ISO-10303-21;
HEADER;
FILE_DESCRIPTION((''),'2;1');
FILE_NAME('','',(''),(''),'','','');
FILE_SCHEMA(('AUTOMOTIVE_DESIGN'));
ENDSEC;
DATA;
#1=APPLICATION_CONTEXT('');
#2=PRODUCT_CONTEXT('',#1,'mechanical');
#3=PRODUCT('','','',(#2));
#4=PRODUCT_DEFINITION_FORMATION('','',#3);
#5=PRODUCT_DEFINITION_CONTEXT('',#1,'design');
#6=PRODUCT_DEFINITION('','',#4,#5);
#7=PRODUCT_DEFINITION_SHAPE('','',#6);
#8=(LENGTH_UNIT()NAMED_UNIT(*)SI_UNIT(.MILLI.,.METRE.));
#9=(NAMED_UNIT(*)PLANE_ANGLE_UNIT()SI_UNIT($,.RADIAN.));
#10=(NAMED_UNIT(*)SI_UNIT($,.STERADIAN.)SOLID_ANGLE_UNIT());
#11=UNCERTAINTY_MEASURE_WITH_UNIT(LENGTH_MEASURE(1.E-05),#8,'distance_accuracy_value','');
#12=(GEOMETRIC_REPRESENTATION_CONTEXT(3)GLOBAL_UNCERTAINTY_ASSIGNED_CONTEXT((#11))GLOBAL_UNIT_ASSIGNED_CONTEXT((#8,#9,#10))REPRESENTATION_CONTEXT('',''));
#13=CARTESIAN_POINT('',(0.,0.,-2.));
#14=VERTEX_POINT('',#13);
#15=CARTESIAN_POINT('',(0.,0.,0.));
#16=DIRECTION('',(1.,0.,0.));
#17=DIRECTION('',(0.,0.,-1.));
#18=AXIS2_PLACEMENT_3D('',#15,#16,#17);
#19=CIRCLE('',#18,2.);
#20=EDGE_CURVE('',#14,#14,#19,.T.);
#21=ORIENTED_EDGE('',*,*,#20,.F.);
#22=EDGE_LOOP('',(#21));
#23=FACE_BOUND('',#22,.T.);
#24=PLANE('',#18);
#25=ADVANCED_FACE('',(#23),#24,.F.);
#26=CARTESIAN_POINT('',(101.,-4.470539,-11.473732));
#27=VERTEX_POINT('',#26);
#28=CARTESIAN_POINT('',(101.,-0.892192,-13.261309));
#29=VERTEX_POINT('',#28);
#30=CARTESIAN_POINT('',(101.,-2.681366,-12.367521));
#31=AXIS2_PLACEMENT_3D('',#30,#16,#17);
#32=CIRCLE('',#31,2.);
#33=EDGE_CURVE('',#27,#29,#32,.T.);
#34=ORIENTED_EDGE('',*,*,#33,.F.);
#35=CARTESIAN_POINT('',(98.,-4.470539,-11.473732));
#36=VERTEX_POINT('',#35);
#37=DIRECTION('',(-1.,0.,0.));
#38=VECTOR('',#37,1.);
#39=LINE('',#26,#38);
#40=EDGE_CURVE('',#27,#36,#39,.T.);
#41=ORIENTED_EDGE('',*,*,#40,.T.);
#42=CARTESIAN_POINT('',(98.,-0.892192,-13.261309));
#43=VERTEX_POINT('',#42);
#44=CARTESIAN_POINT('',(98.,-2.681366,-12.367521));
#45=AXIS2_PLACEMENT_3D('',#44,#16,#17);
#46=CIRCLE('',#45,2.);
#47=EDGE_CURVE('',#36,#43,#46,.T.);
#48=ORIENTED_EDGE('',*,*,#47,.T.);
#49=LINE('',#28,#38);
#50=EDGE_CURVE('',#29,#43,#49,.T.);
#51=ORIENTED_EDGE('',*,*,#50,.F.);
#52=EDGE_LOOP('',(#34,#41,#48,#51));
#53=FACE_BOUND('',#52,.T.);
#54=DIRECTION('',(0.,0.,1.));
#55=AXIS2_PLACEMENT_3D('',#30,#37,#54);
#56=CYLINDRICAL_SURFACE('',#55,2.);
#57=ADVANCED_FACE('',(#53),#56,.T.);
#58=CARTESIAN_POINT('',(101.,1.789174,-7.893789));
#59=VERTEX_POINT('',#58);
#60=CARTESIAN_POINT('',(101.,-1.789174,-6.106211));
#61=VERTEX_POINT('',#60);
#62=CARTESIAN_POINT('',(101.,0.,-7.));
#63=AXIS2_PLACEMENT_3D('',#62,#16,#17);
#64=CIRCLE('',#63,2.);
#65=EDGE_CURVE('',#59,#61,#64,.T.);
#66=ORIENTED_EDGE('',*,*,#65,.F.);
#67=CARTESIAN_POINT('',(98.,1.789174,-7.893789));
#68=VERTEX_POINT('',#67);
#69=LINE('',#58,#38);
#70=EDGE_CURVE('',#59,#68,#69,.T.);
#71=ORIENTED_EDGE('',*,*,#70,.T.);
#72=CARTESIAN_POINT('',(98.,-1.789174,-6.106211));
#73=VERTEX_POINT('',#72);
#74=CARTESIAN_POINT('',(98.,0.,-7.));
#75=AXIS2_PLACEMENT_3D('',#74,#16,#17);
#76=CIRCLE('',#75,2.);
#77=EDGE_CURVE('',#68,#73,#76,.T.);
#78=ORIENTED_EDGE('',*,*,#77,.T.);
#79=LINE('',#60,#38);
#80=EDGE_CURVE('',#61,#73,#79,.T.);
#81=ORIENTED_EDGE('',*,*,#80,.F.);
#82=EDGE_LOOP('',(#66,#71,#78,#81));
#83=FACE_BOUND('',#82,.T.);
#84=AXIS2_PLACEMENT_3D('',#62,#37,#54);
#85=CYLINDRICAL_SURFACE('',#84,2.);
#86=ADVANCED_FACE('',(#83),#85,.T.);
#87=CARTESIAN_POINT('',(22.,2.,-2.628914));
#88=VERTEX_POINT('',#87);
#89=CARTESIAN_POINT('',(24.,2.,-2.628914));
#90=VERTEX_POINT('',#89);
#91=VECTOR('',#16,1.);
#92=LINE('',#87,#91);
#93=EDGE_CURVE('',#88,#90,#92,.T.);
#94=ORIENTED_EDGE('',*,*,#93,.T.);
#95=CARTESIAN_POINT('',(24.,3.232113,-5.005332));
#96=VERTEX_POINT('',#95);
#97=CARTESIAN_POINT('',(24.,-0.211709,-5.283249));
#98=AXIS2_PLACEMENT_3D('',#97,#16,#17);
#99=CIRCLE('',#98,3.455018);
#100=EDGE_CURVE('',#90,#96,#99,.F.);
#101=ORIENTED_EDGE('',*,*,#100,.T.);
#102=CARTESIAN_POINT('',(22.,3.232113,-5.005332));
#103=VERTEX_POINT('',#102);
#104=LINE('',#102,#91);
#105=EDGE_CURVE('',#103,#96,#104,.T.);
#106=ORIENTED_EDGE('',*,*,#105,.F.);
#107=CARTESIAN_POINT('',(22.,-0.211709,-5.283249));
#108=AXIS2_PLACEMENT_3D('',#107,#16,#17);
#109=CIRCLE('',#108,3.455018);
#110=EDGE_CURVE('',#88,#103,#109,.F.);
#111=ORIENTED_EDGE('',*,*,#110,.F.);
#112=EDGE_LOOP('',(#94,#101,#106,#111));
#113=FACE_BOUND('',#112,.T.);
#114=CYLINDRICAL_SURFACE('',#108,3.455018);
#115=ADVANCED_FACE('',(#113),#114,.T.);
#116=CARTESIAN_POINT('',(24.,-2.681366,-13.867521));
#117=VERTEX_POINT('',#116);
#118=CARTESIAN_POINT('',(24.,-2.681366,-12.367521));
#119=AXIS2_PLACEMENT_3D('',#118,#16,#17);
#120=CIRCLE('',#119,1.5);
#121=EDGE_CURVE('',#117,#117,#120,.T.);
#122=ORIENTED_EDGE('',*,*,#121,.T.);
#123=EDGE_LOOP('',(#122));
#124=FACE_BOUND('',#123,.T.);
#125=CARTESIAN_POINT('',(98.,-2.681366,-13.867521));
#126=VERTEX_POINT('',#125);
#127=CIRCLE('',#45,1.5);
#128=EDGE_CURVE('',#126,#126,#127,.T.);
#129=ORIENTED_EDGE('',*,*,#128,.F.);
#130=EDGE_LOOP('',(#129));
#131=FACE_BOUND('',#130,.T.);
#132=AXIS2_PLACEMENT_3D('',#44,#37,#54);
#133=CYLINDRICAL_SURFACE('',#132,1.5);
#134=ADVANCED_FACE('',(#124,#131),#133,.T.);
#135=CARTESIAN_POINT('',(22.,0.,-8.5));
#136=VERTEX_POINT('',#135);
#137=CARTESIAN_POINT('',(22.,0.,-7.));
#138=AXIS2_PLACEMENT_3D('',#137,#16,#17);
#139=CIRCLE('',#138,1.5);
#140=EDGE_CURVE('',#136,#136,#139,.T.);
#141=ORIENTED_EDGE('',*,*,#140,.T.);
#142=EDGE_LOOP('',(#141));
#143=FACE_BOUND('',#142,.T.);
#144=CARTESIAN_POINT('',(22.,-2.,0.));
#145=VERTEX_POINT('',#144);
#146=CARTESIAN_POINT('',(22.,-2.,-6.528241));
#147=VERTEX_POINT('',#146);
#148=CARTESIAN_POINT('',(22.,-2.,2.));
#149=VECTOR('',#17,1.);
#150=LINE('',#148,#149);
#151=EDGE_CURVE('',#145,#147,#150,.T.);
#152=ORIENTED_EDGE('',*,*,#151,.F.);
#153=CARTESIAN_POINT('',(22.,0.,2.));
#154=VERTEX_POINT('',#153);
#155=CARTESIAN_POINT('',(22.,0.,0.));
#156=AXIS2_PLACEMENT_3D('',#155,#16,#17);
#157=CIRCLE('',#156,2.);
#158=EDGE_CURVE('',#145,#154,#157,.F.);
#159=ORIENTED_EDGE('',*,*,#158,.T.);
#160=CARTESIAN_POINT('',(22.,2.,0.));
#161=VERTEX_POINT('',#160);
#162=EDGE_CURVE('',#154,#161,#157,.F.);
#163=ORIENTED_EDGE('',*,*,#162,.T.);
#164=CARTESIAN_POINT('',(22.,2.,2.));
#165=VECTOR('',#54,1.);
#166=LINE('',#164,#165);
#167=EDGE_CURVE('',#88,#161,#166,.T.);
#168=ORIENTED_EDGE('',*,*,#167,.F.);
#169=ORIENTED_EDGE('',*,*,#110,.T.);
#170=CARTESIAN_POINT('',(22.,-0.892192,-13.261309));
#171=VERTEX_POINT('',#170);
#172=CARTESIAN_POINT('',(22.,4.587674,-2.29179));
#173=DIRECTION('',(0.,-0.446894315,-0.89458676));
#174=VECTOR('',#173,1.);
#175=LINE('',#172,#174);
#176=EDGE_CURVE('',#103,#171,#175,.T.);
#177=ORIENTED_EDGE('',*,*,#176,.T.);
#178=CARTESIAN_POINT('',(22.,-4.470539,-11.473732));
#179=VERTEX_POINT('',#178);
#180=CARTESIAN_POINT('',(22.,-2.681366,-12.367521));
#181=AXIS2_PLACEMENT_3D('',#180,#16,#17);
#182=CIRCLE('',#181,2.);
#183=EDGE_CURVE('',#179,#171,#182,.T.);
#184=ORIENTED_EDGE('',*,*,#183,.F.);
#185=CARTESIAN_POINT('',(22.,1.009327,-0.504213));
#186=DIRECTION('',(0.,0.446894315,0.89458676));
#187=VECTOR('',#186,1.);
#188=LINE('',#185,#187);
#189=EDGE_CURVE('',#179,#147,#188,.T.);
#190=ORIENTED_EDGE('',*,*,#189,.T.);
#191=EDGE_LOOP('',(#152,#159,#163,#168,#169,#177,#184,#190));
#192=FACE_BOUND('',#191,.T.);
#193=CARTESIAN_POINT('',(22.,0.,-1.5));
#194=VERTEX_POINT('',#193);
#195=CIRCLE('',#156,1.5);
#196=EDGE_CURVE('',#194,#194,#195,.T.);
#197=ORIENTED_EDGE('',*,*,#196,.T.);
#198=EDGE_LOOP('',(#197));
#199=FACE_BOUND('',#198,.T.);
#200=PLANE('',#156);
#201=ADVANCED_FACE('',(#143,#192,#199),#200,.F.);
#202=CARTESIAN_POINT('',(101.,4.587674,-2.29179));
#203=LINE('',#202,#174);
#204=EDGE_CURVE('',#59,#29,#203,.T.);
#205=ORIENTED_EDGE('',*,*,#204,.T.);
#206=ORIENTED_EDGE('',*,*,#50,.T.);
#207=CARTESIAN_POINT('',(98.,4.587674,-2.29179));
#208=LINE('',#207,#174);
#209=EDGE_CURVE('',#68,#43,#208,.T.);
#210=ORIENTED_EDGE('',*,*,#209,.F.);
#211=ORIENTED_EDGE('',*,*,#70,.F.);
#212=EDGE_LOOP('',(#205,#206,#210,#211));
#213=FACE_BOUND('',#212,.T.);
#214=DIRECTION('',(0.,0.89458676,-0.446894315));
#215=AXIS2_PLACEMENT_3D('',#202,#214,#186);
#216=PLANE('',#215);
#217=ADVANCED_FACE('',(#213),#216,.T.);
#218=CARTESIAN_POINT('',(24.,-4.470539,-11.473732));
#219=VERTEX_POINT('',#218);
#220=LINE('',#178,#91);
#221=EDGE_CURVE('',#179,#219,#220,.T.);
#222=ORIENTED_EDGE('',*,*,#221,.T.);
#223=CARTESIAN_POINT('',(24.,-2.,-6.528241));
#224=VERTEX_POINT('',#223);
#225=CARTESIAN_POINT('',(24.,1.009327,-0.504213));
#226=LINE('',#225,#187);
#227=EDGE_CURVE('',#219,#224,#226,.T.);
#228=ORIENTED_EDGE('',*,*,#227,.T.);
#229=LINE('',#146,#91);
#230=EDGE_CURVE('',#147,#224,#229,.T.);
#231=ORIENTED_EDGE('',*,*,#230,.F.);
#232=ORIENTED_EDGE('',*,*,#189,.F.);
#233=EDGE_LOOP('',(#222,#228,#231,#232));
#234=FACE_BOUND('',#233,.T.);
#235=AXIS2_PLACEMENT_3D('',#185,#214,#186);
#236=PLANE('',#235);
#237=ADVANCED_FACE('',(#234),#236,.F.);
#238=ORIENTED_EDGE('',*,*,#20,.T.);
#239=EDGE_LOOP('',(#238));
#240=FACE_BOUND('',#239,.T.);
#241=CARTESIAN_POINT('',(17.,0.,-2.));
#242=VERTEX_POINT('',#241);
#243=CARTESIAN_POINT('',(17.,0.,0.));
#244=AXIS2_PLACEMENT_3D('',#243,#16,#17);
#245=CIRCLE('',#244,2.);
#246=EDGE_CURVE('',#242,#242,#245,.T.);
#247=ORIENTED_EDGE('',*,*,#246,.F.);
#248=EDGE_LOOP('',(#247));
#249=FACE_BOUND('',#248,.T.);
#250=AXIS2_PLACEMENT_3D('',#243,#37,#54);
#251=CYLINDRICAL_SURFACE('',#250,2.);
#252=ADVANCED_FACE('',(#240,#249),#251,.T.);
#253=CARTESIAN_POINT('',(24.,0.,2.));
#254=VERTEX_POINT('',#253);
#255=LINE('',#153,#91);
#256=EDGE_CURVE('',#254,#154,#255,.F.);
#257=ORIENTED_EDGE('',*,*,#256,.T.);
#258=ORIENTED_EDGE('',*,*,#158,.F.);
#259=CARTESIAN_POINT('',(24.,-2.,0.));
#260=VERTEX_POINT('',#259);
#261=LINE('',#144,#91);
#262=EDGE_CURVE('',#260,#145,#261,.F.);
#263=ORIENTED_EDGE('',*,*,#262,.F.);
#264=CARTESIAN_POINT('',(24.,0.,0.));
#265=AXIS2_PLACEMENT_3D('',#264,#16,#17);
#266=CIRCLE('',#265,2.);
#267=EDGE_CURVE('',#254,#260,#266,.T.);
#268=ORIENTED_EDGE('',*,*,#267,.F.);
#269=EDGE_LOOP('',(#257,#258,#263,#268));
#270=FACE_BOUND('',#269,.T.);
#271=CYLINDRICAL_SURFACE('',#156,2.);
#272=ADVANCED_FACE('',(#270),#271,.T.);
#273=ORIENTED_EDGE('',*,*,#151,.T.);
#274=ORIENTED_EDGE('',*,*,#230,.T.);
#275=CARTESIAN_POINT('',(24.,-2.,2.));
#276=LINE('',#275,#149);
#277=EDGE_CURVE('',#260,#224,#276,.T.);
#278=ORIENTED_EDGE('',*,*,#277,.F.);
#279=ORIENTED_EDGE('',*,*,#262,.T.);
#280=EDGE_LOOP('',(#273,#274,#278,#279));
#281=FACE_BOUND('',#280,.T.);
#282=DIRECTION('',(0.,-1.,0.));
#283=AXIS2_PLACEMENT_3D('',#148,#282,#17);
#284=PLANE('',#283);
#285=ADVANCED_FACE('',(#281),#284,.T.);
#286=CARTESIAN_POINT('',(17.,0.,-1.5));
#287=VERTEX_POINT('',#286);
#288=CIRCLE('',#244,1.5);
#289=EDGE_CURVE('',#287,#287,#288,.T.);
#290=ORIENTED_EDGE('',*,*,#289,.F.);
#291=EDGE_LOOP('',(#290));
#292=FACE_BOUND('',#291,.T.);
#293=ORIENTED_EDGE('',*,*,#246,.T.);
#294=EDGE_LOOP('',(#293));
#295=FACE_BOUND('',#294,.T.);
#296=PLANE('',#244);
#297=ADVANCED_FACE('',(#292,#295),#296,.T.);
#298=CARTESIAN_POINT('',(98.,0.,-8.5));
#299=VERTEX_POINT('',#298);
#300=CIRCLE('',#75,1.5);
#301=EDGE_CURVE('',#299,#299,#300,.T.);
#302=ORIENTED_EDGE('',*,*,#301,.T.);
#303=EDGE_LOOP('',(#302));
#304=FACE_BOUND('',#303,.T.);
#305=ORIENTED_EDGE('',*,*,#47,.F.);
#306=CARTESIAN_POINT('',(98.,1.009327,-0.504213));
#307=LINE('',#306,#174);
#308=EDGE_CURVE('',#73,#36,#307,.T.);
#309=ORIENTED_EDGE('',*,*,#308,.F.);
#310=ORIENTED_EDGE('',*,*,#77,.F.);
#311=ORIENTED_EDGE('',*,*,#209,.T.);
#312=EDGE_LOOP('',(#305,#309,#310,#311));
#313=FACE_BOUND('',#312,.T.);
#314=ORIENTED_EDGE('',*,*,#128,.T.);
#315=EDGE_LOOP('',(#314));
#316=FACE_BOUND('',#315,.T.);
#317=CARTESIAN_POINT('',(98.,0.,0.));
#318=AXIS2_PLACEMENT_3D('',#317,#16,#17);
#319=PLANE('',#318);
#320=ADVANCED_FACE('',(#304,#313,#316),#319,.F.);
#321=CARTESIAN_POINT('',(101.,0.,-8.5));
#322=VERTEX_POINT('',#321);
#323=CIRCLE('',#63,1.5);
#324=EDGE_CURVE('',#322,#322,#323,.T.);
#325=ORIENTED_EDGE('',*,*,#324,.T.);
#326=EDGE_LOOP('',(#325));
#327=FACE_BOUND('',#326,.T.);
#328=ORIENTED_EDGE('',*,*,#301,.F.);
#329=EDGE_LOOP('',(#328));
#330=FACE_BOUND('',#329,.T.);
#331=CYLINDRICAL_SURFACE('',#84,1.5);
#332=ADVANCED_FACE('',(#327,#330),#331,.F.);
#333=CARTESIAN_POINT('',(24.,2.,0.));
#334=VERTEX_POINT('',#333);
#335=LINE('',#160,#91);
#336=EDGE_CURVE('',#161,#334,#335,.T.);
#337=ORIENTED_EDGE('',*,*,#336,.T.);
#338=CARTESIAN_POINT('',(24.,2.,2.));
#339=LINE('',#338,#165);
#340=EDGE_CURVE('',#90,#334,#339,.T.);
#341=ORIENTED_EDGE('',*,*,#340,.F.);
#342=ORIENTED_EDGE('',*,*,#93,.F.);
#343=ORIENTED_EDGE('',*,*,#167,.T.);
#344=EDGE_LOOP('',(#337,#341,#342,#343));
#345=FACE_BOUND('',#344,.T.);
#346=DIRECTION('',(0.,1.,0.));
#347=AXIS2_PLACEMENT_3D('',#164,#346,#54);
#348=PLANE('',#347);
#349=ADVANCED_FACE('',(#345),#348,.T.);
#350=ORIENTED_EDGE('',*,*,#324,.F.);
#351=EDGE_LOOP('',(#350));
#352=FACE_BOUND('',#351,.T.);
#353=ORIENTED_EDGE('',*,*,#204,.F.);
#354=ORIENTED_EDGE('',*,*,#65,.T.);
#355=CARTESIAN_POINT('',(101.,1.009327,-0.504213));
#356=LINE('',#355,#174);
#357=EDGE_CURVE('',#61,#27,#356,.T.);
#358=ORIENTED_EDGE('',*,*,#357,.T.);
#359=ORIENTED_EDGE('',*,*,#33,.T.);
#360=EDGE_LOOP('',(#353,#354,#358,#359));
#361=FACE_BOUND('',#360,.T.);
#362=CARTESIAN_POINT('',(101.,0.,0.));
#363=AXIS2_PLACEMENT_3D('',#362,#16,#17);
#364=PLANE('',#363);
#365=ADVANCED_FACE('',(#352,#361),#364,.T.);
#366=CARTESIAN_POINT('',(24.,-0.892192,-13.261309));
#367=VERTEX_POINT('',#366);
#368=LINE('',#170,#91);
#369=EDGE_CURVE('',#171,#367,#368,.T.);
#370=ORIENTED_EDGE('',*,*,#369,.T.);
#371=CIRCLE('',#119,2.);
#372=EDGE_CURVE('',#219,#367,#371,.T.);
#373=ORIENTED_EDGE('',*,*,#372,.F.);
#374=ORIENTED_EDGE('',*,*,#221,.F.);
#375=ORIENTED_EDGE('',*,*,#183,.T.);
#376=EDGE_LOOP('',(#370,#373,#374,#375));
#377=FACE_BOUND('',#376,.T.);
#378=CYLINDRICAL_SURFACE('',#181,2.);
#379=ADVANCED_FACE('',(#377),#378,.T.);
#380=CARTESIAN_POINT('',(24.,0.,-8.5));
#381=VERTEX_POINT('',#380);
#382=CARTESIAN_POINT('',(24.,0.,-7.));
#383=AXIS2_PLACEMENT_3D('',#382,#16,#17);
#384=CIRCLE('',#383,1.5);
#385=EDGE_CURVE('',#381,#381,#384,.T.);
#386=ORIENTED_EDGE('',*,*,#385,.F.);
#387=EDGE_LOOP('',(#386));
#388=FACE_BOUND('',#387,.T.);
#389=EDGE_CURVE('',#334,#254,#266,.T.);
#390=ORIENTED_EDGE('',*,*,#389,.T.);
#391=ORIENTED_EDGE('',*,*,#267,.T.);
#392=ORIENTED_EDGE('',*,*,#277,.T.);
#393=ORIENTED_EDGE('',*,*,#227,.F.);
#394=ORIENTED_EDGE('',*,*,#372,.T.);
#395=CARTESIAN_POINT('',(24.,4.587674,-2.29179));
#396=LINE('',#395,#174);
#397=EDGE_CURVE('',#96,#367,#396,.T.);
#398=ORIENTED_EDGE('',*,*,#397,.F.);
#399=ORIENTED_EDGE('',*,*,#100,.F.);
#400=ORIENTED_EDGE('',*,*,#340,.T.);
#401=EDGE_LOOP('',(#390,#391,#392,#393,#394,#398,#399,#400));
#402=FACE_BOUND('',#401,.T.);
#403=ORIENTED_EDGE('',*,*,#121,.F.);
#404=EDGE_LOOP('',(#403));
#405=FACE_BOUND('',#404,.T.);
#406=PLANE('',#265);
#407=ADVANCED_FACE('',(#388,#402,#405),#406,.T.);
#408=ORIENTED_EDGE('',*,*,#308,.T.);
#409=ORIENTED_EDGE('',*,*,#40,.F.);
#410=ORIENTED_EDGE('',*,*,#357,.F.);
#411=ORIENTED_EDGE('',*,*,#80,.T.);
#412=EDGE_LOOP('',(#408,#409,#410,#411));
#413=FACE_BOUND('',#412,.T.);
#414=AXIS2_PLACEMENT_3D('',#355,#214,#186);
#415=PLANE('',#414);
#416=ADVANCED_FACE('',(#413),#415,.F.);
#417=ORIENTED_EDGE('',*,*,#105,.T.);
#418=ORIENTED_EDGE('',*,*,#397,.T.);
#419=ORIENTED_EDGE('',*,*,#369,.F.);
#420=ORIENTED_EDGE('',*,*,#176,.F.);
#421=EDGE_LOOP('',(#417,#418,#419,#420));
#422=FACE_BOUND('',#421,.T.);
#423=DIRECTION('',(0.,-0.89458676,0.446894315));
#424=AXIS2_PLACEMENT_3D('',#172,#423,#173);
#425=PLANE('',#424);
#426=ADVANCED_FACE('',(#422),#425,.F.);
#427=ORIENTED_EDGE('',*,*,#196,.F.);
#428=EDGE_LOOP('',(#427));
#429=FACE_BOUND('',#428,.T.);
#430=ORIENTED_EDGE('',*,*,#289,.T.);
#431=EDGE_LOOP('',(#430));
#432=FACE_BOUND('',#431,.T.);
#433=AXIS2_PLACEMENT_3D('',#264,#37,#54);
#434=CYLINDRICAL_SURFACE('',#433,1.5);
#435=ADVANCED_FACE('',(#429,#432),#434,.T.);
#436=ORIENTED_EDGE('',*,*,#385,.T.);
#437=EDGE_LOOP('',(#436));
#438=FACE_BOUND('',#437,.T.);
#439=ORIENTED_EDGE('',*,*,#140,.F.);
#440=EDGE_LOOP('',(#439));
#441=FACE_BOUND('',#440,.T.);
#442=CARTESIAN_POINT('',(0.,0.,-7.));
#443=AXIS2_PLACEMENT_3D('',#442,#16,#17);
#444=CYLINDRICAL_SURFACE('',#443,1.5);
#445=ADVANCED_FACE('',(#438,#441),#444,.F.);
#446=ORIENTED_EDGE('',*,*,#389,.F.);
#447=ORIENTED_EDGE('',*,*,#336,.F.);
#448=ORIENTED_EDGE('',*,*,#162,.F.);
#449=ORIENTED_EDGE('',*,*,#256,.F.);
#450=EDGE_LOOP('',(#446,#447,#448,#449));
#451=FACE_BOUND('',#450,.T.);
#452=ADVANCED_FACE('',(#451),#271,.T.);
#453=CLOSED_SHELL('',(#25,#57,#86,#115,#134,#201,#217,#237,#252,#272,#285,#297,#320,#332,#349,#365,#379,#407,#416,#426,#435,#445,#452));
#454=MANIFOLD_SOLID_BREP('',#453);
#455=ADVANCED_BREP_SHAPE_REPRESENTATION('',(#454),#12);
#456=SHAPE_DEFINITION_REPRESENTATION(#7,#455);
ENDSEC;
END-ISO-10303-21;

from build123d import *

# Parameters (mm, degrees)
SKETCH2_R            = 2
BOSS_EXTRUDE1_DEPTH  = 17
SKETCH3_R            = 1.5
BOSS_EXTRUDE2_DEPTH  = 7
SKETCH4_W            = 3.988125856
SKETCH4_H            = 4
BOSS_EXTRUDE3_DEPTH  = 2
SKETCH5_W            = 2
SKETCH5_H            = 4
BOSS_EXTRUDE4_DEPTH  = 11
FILLET1_R            = 2
FILLET2_R            = 2
FILLET3_R            = 2
SKETCH6_R            = 1.5
CUT_EXTRUDE1_DEPTH   = 26.709920264
BOSS_EXTRUDE8_START  = -2
BOSS_EXTRUDE8_DEPTH  = 2
SKETCH11_R           = 1.5
BOSS_EXTRUDE9_DEPTH  = 74
SKETCH13_R           = 2
SKETCH13_R_2         = 1.5
BOSS_EXTRUDE10_DEPTH = 3


# Read off the part's stored shape, not the designer's step: Boss-Extrude8
with BuildPart() as part:
    # Sketch2 → Boss-Extrude1 (new body)
    with BuildSketch(Plane(origin=(0, 0, 0), x_dir=(0, 0, -1), z_dir=(1, 0, 0))):
        Circle(SKETCH2_R)
    extrude(amount=BOSS_EXTRUDE1_DEPTH)

    # Sketch3 → Boss-Extrude2 (add)
    with BuildSketch(Plane(origin=(17, 0, 0), x_dir=(0, 0, -1), z_dir=(1, 0, 0))):
        Circle(SKETCH3_R)
    extrude(amount=BOSS_EXTRUDE2_DEPTH)

    # Sketch4 → Boss-Extrude3 (add)
    with BuildSketch(Plane(origin=(24, 0, 0), x_dir=(0, 0, -1), z_dir=(1, 0, 0))):
        with Locations((-0.005937072, 0)):
            Rectangle(SKETCH4_W, SKETCH4_H)
    extrude(amount=-BOSS_EXTRUDE3_DEPTH)

    # Sketch5 → Boss-Extrude4 (add)
    with BuildSketch(Plane.XY.offset(2)):
        with Locations((23, 0)):
            Rectangle(SKETCH5_W, SKETCH5_H)
    extrude(amount=-BOSS_EXTRUDE4_DEPTH)

    # Fillet1
    fillet1_edges = [part.edges().sort_by_distance(p)[0] for p in [
        (23, 2, 2),
    ]]
    fillet(fillet1_edges, radius=FILLET1_R)

    # Fillet2
    fillet2_edges = [part.edges().sort_by_distance(p)[0] for p in [
        (23, -2, 2),
    ]]
    fillet(fillet2_edges, radius=FILLET2_R - 0.0001)  # a hair under: the kernel refuses the full size

    # Fillet3
    fillet3_edges = [part.edges().sort_by_distance(p)[0] for p in [
        (23, -2, -9),
        (23, 2, -9),
    ]]
    fillet(fillet3_edges, radius=FILLET3_R - 0.0001)  # a hair under: the kernel refuses the full size

    # Sketch6 → Cut-Extrude1 (cut, through all)
    with BuildSketch(Plane(origin=(24, 0, 0), x_dir=(0, 0, -1), z_dir=(1, 0, 0))):
        with Locations((7, 0)):
            Circle(SKETCH6_R)
    extrude(amount=-CUT_EXTRUDE1_DEPTH, mode=Mode.SUBTRACT)

    # Boss-Extrude8 outline → Boss-Extrude8 (add)
    with BuildSketch(Plane(origin=(24, 0, 0), x_dir=(0, 0, -1), z_dir=(1, 0, 0)).offset(BOSS_EXTRUDE8_START)):
        with BuildLine():
            Line((7.893788641, 1.789173514), (5.005331724, 3.232113464))
            ThreePointArc((5.005331724, 3.232113464), (3.692949686, 2.855553556), (2.628913929, 2))
            Line((2.628913929, 2), (7, 2))
            ThreePointArc((7, 2), (7.459158453, 1.946579953), (7.893788641, 1.789173514))
        make_face()
        with BuildLine():
            Line((13.26130919, -0.892192368), (7.893788641, 1.789173514))
            ThreePointArc((7.893788641, 1.789173514), (8.701113941, 1.051765829), (9, 0))
            ThreePointArc((9, 0), (8.414213562, -1.414213562), (7, -2))
            Line((7, -2), (6.528240855, -2))
            Line((6.528240855, -2), (11.473731932, -4.470539409))
            ThreePointArc((11.473731932, -4.470539409), (14.156694081, -3.575154517), (13.26130919, -0.892192368))
        make_face()
    extrude(amount=BOSS_EXTRUDE8_DEPTH)

    # Sketch11 → Boss-Extrude9 (add)
    with BuildSketch(Plane(origin=(24, 0, 0), x_dir=(0, 0, -1), z_dir=(1, 0, 0))):
        with Locations((12.367520561, -2.681365888)):
            Circle(SKETCH11_R)
    extrude(amount=BOSS_EXTRUDE9_DEPTH)

    # Sketch13 → Boss-Extrude10 (add)
    # profile 1 of 4: a face of its own
    with BuildSketch(Plane(origin=(98, 0, 0), x_dir=(0, 0, -1), z_dir=(1, 0, 0))):
        with Locations((7, 0)):
            Circle(SKETCH13_R)
        with Locations((7, 0)):
            Circle(SKETCH13_R_2, mode=Mode.SUBTRACT)
    # profile 2 of 4: a face of its own
    with BuildSketch(Plane(origin=(98, 0, 0), x_dir=(0, 0, -1), z_dir=(1, 0, 0))):
        with Locations((12.367520561, -2.681365888)):
            Circle(SKETCH13_R)
        with Locations((12.367520561, -2.681365888)):
            Circle(SKETCH13_R_2, mode=Mode.SUBTRACT)
    # profile 3 of 4: a face of its own
    with BuildSketch(Plane(origin=(98, 0, 0), x_dir=(0, 0, -1), z_dir=(1, 0, 0))):
        with BuildLine():
            ThreePointArc((9, 0), (8.051765834, -1.701113938), (6.106211371, -1.78917352))
            Line((6.106211371, -1.78917352), (11.473731932, -4.470539409))
            ThreePointArc((11.473731932, -4.470539409), (10.578347041, -1.787577259), (13.26130919, -0.892192368))
            Line((13.26130919, -0.892192368), (7.893788629, 1.78917352))
            ThreePointArc((7.893788629, 1.78917352), (8.701113938, 1.051765834), (9, 0))
        make_face()
    # profile 4 of 4: a face of its own
    with BuildSketch(Plane(origin=(98, 0, 0), x_dir=(0, 0, -1), z_dir=(1, 0, 0))):
        with Locations((12.367520561, -2.681365888)):
            Circle(SKETCH13_R_2)
    extrude(amount=BOSS_EXTRUDE10_DEPTH)


solid = part.part
